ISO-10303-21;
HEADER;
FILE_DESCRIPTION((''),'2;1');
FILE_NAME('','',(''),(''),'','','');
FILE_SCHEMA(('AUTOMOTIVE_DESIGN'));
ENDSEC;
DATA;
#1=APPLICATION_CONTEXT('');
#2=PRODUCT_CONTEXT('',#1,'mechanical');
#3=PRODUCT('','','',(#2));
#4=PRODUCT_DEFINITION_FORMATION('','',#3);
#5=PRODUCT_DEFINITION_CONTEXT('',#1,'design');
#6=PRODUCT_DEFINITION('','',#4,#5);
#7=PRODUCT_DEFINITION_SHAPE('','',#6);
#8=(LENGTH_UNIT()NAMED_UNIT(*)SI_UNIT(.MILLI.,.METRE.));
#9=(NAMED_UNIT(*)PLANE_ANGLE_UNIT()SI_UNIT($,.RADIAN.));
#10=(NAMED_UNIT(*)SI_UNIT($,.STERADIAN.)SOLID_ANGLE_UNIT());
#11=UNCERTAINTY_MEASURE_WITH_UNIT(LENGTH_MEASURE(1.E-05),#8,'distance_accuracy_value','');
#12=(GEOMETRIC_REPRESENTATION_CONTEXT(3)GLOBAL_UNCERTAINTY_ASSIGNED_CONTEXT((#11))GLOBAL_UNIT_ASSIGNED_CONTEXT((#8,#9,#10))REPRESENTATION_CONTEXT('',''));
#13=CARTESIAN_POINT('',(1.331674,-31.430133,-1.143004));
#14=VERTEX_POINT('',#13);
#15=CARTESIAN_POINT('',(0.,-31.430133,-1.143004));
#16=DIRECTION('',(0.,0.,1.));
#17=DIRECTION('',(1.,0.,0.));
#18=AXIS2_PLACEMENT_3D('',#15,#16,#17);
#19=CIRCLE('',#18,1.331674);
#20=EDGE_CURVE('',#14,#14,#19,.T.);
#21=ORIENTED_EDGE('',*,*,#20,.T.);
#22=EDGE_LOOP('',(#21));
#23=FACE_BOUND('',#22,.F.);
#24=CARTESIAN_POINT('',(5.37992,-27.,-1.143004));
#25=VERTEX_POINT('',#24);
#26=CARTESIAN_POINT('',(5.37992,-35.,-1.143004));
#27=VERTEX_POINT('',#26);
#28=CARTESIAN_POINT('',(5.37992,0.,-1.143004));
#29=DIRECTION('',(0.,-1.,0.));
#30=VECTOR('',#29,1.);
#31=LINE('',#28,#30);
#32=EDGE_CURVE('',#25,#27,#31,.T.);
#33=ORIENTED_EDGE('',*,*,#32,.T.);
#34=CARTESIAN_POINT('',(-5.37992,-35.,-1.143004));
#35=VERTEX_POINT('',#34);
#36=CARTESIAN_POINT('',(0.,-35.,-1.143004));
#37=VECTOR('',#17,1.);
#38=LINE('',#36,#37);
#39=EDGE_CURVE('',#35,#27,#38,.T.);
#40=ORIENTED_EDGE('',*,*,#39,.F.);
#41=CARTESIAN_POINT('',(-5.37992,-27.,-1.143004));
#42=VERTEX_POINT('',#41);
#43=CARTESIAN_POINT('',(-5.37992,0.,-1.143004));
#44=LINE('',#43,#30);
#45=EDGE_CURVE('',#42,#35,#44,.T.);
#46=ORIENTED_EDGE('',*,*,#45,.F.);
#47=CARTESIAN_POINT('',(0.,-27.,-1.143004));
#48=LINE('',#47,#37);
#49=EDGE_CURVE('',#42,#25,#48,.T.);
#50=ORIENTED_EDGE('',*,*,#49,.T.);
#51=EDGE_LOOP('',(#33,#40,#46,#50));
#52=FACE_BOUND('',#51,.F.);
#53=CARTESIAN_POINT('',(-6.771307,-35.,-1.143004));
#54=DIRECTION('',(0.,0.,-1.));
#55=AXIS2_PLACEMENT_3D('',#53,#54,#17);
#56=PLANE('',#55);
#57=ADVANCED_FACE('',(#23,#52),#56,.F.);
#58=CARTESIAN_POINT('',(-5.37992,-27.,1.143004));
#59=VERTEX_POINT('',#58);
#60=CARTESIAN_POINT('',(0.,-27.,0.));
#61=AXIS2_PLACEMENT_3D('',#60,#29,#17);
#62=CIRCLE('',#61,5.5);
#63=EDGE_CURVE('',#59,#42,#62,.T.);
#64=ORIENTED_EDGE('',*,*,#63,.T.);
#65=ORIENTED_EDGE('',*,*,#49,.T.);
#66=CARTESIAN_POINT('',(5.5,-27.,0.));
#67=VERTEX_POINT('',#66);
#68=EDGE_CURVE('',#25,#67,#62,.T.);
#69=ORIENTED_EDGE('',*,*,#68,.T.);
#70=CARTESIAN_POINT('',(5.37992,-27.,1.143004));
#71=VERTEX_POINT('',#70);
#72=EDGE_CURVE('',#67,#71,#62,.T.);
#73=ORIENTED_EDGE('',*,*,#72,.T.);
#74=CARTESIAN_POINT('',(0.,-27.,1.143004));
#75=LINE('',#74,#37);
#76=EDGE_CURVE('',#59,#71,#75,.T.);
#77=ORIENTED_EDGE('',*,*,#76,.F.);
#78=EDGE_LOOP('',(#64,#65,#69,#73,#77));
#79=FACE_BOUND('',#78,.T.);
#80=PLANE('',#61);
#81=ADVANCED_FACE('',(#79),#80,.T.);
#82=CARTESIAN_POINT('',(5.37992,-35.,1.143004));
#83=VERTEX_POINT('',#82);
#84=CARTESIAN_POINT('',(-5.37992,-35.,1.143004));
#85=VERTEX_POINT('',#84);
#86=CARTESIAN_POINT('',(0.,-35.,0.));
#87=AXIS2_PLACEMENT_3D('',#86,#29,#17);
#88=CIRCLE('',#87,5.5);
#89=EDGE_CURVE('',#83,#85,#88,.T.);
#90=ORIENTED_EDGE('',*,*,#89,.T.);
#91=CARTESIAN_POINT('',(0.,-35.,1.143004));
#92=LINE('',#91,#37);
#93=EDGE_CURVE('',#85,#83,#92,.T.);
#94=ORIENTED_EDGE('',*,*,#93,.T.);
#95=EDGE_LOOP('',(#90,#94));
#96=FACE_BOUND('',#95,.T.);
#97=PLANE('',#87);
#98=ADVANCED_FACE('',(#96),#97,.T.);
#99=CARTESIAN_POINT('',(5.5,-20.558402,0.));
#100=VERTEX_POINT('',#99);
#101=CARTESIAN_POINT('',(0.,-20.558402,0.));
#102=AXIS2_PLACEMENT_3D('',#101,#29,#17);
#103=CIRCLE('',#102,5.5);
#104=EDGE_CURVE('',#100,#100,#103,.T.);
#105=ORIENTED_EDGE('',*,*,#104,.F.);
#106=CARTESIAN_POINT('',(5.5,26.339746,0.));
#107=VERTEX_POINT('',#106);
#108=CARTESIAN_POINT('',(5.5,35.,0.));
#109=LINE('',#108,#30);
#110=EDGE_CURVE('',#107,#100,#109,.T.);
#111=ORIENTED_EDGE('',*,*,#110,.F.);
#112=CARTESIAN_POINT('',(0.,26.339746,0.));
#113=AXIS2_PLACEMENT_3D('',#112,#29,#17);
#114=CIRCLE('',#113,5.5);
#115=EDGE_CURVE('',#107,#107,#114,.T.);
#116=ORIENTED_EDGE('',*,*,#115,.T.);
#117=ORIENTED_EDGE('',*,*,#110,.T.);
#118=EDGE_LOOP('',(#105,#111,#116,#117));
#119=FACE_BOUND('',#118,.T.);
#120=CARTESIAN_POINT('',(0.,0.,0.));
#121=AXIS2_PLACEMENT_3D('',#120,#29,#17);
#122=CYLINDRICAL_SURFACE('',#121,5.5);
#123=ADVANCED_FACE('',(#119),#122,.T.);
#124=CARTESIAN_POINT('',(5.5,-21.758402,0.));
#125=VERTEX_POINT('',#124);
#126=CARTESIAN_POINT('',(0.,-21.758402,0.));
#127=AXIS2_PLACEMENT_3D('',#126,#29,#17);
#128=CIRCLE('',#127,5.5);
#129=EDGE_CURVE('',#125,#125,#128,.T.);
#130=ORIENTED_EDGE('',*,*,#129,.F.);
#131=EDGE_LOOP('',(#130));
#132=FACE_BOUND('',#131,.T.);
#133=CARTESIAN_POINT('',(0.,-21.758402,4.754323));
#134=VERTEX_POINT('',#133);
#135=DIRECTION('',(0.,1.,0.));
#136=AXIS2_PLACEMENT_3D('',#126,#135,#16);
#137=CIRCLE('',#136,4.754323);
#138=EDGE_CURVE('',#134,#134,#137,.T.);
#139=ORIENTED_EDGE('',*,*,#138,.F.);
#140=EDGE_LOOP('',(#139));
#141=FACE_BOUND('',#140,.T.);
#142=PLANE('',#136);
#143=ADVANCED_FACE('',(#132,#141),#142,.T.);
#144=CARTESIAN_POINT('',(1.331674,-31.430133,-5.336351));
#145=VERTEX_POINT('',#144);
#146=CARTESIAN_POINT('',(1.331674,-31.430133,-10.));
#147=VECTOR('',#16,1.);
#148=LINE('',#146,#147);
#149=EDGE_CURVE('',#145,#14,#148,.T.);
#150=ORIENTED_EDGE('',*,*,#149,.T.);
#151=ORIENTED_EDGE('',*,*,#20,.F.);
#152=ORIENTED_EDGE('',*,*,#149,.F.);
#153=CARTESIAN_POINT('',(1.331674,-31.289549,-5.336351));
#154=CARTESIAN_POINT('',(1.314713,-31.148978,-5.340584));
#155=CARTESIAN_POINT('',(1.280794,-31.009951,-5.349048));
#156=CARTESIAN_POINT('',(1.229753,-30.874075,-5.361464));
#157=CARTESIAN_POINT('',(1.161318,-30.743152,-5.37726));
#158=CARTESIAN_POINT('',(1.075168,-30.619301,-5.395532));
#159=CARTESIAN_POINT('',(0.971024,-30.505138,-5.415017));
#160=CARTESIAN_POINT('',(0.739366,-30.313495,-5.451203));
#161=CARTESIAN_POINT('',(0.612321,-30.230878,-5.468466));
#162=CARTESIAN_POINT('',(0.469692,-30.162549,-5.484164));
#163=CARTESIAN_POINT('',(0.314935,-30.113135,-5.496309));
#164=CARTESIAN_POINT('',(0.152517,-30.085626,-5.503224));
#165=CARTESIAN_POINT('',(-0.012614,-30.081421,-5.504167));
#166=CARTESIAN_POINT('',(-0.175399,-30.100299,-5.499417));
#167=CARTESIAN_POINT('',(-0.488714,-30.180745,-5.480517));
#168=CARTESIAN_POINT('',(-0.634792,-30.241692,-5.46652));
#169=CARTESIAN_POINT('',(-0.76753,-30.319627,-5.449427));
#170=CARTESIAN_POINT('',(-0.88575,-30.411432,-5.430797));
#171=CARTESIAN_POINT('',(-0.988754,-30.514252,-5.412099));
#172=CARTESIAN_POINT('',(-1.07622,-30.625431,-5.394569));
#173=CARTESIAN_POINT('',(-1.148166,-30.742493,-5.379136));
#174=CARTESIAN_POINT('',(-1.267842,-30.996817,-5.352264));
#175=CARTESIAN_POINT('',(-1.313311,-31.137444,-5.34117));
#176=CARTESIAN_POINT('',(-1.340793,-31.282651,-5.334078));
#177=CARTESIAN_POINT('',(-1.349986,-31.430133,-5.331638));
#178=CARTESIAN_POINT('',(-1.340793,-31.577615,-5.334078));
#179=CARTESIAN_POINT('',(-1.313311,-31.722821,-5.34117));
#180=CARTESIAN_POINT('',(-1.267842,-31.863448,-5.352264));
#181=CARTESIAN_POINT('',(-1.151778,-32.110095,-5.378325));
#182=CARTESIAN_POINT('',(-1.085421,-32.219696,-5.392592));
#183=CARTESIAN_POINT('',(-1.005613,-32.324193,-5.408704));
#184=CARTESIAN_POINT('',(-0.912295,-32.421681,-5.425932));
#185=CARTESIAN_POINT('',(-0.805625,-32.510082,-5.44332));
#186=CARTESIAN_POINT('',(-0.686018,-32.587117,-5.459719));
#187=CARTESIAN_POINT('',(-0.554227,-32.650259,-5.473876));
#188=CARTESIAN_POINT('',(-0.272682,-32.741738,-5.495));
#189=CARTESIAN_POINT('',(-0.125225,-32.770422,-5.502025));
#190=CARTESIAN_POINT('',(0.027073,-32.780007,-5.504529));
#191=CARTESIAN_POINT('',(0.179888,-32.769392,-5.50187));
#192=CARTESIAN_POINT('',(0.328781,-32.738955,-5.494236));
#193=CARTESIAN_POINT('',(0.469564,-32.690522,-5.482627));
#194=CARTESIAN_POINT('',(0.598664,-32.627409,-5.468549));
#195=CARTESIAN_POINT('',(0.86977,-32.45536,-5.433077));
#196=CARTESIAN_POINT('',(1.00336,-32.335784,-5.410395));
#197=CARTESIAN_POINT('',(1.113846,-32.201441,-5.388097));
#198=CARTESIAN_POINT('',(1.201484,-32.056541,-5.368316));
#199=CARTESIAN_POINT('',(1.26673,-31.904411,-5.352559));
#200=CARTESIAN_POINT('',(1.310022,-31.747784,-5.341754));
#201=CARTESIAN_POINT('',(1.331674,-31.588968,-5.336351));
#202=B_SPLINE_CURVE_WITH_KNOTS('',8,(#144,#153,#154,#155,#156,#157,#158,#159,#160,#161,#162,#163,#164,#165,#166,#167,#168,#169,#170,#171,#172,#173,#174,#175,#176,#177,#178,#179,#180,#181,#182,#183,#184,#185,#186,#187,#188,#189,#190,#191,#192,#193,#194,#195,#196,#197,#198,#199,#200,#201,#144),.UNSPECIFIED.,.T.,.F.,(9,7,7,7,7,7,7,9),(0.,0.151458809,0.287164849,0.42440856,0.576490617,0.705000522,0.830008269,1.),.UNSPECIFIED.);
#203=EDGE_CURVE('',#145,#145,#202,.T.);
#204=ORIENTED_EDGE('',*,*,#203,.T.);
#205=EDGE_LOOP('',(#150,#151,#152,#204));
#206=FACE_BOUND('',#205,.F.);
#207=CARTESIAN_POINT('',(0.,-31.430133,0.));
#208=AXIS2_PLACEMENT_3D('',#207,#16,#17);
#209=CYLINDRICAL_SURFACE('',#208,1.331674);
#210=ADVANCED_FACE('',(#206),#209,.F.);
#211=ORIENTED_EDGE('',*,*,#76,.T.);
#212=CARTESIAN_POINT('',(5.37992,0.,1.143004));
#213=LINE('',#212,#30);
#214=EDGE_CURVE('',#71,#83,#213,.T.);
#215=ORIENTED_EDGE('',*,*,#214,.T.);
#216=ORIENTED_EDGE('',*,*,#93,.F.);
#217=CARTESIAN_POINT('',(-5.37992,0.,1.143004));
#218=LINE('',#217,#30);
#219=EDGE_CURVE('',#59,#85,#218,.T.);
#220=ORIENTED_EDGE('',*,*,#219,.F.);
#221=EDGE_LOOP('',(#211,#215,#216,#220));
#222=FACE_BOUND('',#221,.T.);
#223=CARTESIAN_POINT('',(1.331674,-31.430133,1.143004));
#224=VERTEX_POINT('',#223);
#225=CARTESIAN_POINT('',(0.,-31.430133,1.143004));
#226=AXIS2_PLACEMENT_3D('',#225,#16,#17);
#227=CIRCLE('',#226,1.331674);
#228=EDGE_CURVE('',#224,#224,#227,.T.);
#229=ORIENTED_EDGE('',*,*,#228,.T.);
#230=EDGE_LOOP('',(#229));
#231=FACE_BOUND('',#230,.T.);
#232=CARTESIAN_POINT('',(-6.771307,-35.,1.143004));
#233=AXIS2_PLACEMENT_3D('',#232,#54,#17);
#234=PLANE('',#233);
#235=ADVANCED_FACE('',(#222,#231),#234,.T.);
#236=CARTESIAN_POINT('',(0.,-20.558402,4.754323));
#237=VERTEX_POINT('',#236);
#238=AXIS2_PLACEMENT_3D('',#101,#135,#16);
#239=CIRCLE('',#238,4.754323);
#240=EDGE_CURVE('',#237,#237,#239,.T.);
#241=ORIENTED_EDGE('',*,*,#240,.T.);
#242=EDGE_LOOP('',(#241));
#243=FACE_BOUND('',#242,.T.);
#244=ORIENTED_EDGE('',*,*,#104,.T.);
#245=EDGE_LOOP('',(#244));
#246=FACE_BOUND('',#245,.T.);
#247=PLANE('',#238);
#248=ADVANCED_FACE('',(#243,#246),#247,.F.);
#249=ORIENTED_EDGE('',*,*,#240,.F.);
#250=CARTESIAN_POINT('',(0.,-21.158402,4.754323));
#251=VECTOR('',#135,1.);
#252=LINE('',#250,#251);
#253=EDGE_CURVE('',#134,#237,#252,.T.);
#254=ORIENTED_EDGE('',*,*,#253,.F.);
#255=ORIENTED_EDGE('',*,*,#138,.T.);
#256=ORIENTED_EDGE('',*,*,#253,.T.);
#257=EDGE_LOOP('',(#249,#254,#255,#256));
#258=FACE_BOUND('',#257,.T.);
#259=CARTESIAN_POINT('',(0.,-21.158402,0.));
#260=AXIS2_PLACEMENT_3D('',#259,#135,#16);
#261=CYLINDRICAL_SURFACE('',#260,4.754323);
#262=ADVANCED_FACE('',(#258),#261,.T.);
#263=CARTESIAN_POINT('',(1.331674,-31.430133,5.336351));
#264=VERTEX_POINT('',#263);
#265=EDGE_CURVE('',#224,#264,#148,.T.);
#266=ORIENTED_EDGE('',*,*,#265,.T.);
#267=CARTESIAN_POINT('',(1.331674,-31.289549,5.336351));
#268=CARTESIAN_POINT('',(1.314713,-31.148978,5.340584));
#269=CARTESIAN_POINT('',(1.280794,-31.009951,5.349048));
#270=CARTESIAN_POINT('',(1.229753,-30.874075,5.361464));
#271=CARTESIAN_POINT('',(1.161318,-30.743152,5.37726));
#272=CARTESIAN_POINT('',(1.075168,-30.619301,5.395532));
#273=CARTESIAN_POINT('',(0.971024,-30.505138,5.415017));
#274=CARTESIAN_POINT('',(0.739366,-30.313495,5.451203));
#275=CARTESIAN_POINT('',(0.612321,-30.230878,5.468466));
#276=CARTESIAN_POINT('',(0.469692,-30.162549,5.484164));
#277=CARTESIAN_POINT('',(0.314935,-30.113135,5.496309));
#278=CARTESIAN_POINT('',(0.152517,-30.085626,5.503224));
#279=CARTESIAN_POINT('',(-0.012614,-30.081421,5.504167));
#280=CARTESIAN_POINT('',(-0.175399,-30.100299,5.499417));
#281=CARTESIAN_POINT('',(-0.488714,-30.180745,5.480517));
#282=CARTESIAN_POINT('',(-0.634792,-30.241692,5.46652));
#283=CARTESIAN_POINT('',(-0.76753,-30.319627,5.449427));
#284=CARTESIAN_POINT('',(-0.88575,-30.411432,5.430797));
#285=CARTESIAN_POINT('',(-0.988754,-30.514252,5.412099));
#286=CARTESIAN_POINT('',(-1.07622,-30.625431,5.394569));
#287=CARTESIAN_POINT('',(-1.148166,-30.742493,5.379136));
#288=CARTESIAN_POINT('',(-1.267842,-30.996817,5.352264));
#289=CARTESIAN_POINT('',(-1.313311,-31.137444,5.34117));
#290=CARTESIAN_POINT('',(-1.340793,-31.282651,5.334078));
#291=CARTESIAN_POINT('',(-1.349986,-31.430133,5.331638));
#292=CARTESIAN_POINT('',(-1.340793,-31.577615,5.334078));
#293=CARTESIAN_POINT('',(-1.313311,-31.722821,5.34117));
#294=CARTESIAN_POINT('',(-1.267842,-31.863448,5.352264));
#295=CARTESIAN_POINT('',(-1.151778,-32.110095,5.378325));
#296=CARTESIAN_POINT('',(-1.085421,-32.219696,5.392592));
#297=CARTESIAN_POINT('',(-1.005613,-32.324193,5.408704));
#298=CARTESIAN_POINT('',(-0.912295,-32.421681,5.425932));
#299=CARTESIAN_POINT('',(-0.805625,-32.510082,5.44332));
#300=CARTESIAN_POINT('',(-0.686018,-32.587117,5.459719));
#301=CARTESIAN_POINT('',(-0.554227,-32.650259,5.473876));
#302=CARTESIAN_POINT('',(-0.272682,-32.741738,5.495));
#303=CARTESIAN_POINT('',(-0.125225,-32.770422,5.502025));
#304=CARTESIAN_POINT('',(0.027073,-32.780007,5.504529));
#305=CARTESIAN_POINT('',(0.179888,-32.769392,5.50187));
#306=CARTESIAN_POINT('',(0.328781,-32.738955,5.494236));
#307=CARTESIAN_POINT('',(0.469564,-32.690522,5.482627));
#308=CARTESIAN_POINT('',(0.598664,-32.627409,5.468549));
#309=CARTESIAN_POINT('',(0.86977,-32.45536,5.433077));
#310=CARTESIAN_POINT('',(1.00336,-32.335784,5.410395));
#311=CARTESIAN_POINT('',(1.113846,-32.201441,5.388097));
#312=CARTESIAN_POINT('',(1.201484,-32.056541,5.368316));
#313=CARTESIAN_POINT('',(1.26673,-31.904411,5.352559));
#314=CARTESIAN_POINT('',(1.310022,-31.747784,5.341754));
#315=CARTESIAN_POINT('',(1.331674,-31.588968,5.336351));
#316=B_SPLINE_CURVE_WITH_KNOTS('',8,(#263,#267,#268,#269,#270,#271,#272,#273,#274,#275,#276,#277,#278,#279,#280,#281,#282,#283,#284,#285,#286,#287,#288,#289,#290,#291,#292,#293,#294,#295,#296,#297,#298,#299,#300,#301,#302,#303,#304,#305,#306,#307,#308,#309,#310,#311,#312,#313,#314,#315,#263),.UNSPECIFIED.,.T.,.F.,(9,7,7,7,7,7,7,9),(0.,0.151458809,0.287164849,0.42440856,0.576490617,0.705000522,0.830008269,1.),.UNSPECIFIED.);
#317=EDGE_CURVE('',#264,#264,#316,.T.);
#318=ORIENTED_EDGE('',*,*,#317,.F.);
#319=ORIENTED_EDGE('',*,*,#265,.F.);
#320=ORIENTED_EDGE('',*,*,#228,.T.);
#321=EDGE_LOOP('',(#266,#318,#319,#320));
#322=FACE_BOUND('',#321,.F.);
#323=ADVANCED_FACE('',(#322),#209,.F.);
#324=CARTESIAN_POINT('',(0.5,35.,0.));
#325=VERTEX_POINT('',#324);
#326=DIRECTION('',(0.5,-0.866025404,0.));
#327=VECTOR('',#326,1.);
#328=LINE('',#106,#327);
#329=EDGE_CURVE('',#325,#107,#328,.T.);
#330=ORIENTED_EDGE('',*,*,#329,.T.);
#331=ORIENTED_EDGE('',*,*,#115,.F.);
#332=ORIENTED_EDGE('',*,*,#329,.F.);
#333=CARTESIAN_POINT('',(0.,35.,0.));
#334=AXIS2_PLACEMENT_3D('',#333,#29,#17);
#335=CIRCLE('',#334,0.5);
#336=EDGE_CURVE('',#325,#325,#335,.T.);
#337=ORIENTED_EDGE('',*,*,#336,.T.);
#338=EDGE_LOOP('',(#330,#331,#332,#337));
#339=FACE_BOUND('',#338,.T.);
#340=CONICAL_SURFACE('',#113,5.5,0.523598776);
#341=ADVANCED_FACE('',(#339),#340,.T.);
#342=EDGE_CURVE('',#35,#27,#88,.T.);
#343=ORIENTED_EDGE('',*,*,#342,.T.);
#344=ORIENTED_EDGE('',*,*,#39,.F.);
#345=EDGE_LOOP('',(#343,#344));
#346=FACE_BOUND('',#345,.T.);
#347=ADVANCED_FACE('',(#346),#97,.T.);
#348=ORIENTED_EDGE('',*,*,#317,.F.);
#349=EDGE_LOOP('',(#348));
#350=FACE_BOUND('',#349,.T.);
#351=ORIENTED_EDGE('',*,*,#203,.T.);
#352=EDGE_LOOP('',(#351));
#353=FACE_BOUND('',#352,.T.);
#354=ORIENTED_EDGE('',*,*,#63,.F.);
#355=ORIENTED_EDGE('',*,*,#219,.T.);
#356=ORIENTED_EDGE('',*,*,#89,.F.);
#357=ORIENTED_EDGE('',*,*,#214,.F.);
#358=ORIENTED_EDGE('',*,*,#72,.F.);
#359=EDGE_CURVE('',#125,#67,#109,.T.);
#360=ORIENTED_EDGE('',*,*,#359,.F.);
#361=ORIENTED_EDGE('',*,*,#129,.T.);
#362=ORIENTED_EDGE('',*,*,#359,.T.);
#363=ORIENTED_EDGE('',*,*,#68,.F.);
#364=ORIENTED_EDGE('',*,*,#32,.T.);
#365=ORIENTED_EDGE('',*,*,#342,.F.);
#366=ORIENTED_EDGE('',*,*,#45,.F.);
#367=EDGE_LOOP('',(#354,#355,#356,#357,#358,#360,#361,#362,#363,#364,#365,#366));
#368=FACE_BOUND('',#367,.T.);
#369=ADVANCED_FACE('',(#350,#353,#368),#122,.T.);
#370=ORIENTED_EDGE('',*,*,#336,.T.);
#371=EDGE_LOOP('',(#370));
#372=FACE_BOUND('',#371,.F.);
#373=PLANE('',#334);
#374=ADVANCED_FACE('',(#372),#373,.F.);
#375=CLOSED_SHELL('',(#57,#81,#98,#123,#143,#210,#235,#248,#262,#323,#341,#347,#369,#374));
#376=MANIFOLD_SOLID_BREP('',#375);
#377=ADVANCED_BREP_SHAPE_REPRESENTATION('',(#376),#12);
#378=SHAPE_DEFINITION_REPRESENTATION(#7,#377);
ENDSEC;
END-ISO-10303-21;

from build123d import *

# Parameters (mm, degrees)
F0_R     = 5.5
F1_DEPTH = 35
F2_SIZE2 = 8.6602540378
F2_SIZE  = 5
F4_W     = 13.5426148772
F4_H     = 2.286007395
F5_DEPTH = 8
F6_R     = 1.3316742147
F7_DEPTH = 10
F8_W     = 1.2
F8_H     = 1.4649596699
F8_H_2   = 0.745677419


with BuildPart() as f1:
    # F0 (on Front) → F1 (new body, symmetric)
    with BuildSketch(Plane.XZ):
        Circle(F0_R)
    extrude(amount=F1_DEPTH, both=True)

    # F2
    f2_edges = [f1.edges().sort_by_distance(p)[0] for p in [
        (-5.5, 35, 0),
    ]]
    f2_side = f1.faces().sort_by_distance((0, 35, 0))[0]
    chamfer(f2_edges, length=F2_SIZE, length2=F2_SIZE2, reference=f2_side)

    # F4 (on face) → F5 (cut)
    with BuildSketch(Plane.XZ.offset(35)):
        Rectangle(F4_W, F4_H)
    extrude(amount=-F5_DEPTH, mode=Mode.SUBTRACT)

    # F6 (on Top) → F7 (cut, symmetric)
    with BuildSketch(Plane.XY):
        with Locations((0, -31.4301326871)):
            Circle(F6_R)
    extrude(amount=F7_DEPTH, both=True, mode=Mode.SUBTRACT)

    # F8 (on Right) → F9 (revolve, cut)
    with BuildSketch(Plane.YZ):
        with Locations((-21.1584017664, 6.2324798349)):
            Rectangle(F8_W, F8_H)
        with Locations((-21.1584017664, 5.1271612905)):
            Rectangle(F8_W, F8_H_2)
    revolve(axis=Axis((0, -17.5, 0), (0, 1, 0)), mode=Mode.SUBTRACT)


with BuildPart() as f10_1:
    # F10: copy of F1
    add(f1.part.moved(Location((0, 0, 34))))


with BuildPart() as f12_1:
    # F12: copy of F1
    add(f1.part)


solid = f12_1.part
